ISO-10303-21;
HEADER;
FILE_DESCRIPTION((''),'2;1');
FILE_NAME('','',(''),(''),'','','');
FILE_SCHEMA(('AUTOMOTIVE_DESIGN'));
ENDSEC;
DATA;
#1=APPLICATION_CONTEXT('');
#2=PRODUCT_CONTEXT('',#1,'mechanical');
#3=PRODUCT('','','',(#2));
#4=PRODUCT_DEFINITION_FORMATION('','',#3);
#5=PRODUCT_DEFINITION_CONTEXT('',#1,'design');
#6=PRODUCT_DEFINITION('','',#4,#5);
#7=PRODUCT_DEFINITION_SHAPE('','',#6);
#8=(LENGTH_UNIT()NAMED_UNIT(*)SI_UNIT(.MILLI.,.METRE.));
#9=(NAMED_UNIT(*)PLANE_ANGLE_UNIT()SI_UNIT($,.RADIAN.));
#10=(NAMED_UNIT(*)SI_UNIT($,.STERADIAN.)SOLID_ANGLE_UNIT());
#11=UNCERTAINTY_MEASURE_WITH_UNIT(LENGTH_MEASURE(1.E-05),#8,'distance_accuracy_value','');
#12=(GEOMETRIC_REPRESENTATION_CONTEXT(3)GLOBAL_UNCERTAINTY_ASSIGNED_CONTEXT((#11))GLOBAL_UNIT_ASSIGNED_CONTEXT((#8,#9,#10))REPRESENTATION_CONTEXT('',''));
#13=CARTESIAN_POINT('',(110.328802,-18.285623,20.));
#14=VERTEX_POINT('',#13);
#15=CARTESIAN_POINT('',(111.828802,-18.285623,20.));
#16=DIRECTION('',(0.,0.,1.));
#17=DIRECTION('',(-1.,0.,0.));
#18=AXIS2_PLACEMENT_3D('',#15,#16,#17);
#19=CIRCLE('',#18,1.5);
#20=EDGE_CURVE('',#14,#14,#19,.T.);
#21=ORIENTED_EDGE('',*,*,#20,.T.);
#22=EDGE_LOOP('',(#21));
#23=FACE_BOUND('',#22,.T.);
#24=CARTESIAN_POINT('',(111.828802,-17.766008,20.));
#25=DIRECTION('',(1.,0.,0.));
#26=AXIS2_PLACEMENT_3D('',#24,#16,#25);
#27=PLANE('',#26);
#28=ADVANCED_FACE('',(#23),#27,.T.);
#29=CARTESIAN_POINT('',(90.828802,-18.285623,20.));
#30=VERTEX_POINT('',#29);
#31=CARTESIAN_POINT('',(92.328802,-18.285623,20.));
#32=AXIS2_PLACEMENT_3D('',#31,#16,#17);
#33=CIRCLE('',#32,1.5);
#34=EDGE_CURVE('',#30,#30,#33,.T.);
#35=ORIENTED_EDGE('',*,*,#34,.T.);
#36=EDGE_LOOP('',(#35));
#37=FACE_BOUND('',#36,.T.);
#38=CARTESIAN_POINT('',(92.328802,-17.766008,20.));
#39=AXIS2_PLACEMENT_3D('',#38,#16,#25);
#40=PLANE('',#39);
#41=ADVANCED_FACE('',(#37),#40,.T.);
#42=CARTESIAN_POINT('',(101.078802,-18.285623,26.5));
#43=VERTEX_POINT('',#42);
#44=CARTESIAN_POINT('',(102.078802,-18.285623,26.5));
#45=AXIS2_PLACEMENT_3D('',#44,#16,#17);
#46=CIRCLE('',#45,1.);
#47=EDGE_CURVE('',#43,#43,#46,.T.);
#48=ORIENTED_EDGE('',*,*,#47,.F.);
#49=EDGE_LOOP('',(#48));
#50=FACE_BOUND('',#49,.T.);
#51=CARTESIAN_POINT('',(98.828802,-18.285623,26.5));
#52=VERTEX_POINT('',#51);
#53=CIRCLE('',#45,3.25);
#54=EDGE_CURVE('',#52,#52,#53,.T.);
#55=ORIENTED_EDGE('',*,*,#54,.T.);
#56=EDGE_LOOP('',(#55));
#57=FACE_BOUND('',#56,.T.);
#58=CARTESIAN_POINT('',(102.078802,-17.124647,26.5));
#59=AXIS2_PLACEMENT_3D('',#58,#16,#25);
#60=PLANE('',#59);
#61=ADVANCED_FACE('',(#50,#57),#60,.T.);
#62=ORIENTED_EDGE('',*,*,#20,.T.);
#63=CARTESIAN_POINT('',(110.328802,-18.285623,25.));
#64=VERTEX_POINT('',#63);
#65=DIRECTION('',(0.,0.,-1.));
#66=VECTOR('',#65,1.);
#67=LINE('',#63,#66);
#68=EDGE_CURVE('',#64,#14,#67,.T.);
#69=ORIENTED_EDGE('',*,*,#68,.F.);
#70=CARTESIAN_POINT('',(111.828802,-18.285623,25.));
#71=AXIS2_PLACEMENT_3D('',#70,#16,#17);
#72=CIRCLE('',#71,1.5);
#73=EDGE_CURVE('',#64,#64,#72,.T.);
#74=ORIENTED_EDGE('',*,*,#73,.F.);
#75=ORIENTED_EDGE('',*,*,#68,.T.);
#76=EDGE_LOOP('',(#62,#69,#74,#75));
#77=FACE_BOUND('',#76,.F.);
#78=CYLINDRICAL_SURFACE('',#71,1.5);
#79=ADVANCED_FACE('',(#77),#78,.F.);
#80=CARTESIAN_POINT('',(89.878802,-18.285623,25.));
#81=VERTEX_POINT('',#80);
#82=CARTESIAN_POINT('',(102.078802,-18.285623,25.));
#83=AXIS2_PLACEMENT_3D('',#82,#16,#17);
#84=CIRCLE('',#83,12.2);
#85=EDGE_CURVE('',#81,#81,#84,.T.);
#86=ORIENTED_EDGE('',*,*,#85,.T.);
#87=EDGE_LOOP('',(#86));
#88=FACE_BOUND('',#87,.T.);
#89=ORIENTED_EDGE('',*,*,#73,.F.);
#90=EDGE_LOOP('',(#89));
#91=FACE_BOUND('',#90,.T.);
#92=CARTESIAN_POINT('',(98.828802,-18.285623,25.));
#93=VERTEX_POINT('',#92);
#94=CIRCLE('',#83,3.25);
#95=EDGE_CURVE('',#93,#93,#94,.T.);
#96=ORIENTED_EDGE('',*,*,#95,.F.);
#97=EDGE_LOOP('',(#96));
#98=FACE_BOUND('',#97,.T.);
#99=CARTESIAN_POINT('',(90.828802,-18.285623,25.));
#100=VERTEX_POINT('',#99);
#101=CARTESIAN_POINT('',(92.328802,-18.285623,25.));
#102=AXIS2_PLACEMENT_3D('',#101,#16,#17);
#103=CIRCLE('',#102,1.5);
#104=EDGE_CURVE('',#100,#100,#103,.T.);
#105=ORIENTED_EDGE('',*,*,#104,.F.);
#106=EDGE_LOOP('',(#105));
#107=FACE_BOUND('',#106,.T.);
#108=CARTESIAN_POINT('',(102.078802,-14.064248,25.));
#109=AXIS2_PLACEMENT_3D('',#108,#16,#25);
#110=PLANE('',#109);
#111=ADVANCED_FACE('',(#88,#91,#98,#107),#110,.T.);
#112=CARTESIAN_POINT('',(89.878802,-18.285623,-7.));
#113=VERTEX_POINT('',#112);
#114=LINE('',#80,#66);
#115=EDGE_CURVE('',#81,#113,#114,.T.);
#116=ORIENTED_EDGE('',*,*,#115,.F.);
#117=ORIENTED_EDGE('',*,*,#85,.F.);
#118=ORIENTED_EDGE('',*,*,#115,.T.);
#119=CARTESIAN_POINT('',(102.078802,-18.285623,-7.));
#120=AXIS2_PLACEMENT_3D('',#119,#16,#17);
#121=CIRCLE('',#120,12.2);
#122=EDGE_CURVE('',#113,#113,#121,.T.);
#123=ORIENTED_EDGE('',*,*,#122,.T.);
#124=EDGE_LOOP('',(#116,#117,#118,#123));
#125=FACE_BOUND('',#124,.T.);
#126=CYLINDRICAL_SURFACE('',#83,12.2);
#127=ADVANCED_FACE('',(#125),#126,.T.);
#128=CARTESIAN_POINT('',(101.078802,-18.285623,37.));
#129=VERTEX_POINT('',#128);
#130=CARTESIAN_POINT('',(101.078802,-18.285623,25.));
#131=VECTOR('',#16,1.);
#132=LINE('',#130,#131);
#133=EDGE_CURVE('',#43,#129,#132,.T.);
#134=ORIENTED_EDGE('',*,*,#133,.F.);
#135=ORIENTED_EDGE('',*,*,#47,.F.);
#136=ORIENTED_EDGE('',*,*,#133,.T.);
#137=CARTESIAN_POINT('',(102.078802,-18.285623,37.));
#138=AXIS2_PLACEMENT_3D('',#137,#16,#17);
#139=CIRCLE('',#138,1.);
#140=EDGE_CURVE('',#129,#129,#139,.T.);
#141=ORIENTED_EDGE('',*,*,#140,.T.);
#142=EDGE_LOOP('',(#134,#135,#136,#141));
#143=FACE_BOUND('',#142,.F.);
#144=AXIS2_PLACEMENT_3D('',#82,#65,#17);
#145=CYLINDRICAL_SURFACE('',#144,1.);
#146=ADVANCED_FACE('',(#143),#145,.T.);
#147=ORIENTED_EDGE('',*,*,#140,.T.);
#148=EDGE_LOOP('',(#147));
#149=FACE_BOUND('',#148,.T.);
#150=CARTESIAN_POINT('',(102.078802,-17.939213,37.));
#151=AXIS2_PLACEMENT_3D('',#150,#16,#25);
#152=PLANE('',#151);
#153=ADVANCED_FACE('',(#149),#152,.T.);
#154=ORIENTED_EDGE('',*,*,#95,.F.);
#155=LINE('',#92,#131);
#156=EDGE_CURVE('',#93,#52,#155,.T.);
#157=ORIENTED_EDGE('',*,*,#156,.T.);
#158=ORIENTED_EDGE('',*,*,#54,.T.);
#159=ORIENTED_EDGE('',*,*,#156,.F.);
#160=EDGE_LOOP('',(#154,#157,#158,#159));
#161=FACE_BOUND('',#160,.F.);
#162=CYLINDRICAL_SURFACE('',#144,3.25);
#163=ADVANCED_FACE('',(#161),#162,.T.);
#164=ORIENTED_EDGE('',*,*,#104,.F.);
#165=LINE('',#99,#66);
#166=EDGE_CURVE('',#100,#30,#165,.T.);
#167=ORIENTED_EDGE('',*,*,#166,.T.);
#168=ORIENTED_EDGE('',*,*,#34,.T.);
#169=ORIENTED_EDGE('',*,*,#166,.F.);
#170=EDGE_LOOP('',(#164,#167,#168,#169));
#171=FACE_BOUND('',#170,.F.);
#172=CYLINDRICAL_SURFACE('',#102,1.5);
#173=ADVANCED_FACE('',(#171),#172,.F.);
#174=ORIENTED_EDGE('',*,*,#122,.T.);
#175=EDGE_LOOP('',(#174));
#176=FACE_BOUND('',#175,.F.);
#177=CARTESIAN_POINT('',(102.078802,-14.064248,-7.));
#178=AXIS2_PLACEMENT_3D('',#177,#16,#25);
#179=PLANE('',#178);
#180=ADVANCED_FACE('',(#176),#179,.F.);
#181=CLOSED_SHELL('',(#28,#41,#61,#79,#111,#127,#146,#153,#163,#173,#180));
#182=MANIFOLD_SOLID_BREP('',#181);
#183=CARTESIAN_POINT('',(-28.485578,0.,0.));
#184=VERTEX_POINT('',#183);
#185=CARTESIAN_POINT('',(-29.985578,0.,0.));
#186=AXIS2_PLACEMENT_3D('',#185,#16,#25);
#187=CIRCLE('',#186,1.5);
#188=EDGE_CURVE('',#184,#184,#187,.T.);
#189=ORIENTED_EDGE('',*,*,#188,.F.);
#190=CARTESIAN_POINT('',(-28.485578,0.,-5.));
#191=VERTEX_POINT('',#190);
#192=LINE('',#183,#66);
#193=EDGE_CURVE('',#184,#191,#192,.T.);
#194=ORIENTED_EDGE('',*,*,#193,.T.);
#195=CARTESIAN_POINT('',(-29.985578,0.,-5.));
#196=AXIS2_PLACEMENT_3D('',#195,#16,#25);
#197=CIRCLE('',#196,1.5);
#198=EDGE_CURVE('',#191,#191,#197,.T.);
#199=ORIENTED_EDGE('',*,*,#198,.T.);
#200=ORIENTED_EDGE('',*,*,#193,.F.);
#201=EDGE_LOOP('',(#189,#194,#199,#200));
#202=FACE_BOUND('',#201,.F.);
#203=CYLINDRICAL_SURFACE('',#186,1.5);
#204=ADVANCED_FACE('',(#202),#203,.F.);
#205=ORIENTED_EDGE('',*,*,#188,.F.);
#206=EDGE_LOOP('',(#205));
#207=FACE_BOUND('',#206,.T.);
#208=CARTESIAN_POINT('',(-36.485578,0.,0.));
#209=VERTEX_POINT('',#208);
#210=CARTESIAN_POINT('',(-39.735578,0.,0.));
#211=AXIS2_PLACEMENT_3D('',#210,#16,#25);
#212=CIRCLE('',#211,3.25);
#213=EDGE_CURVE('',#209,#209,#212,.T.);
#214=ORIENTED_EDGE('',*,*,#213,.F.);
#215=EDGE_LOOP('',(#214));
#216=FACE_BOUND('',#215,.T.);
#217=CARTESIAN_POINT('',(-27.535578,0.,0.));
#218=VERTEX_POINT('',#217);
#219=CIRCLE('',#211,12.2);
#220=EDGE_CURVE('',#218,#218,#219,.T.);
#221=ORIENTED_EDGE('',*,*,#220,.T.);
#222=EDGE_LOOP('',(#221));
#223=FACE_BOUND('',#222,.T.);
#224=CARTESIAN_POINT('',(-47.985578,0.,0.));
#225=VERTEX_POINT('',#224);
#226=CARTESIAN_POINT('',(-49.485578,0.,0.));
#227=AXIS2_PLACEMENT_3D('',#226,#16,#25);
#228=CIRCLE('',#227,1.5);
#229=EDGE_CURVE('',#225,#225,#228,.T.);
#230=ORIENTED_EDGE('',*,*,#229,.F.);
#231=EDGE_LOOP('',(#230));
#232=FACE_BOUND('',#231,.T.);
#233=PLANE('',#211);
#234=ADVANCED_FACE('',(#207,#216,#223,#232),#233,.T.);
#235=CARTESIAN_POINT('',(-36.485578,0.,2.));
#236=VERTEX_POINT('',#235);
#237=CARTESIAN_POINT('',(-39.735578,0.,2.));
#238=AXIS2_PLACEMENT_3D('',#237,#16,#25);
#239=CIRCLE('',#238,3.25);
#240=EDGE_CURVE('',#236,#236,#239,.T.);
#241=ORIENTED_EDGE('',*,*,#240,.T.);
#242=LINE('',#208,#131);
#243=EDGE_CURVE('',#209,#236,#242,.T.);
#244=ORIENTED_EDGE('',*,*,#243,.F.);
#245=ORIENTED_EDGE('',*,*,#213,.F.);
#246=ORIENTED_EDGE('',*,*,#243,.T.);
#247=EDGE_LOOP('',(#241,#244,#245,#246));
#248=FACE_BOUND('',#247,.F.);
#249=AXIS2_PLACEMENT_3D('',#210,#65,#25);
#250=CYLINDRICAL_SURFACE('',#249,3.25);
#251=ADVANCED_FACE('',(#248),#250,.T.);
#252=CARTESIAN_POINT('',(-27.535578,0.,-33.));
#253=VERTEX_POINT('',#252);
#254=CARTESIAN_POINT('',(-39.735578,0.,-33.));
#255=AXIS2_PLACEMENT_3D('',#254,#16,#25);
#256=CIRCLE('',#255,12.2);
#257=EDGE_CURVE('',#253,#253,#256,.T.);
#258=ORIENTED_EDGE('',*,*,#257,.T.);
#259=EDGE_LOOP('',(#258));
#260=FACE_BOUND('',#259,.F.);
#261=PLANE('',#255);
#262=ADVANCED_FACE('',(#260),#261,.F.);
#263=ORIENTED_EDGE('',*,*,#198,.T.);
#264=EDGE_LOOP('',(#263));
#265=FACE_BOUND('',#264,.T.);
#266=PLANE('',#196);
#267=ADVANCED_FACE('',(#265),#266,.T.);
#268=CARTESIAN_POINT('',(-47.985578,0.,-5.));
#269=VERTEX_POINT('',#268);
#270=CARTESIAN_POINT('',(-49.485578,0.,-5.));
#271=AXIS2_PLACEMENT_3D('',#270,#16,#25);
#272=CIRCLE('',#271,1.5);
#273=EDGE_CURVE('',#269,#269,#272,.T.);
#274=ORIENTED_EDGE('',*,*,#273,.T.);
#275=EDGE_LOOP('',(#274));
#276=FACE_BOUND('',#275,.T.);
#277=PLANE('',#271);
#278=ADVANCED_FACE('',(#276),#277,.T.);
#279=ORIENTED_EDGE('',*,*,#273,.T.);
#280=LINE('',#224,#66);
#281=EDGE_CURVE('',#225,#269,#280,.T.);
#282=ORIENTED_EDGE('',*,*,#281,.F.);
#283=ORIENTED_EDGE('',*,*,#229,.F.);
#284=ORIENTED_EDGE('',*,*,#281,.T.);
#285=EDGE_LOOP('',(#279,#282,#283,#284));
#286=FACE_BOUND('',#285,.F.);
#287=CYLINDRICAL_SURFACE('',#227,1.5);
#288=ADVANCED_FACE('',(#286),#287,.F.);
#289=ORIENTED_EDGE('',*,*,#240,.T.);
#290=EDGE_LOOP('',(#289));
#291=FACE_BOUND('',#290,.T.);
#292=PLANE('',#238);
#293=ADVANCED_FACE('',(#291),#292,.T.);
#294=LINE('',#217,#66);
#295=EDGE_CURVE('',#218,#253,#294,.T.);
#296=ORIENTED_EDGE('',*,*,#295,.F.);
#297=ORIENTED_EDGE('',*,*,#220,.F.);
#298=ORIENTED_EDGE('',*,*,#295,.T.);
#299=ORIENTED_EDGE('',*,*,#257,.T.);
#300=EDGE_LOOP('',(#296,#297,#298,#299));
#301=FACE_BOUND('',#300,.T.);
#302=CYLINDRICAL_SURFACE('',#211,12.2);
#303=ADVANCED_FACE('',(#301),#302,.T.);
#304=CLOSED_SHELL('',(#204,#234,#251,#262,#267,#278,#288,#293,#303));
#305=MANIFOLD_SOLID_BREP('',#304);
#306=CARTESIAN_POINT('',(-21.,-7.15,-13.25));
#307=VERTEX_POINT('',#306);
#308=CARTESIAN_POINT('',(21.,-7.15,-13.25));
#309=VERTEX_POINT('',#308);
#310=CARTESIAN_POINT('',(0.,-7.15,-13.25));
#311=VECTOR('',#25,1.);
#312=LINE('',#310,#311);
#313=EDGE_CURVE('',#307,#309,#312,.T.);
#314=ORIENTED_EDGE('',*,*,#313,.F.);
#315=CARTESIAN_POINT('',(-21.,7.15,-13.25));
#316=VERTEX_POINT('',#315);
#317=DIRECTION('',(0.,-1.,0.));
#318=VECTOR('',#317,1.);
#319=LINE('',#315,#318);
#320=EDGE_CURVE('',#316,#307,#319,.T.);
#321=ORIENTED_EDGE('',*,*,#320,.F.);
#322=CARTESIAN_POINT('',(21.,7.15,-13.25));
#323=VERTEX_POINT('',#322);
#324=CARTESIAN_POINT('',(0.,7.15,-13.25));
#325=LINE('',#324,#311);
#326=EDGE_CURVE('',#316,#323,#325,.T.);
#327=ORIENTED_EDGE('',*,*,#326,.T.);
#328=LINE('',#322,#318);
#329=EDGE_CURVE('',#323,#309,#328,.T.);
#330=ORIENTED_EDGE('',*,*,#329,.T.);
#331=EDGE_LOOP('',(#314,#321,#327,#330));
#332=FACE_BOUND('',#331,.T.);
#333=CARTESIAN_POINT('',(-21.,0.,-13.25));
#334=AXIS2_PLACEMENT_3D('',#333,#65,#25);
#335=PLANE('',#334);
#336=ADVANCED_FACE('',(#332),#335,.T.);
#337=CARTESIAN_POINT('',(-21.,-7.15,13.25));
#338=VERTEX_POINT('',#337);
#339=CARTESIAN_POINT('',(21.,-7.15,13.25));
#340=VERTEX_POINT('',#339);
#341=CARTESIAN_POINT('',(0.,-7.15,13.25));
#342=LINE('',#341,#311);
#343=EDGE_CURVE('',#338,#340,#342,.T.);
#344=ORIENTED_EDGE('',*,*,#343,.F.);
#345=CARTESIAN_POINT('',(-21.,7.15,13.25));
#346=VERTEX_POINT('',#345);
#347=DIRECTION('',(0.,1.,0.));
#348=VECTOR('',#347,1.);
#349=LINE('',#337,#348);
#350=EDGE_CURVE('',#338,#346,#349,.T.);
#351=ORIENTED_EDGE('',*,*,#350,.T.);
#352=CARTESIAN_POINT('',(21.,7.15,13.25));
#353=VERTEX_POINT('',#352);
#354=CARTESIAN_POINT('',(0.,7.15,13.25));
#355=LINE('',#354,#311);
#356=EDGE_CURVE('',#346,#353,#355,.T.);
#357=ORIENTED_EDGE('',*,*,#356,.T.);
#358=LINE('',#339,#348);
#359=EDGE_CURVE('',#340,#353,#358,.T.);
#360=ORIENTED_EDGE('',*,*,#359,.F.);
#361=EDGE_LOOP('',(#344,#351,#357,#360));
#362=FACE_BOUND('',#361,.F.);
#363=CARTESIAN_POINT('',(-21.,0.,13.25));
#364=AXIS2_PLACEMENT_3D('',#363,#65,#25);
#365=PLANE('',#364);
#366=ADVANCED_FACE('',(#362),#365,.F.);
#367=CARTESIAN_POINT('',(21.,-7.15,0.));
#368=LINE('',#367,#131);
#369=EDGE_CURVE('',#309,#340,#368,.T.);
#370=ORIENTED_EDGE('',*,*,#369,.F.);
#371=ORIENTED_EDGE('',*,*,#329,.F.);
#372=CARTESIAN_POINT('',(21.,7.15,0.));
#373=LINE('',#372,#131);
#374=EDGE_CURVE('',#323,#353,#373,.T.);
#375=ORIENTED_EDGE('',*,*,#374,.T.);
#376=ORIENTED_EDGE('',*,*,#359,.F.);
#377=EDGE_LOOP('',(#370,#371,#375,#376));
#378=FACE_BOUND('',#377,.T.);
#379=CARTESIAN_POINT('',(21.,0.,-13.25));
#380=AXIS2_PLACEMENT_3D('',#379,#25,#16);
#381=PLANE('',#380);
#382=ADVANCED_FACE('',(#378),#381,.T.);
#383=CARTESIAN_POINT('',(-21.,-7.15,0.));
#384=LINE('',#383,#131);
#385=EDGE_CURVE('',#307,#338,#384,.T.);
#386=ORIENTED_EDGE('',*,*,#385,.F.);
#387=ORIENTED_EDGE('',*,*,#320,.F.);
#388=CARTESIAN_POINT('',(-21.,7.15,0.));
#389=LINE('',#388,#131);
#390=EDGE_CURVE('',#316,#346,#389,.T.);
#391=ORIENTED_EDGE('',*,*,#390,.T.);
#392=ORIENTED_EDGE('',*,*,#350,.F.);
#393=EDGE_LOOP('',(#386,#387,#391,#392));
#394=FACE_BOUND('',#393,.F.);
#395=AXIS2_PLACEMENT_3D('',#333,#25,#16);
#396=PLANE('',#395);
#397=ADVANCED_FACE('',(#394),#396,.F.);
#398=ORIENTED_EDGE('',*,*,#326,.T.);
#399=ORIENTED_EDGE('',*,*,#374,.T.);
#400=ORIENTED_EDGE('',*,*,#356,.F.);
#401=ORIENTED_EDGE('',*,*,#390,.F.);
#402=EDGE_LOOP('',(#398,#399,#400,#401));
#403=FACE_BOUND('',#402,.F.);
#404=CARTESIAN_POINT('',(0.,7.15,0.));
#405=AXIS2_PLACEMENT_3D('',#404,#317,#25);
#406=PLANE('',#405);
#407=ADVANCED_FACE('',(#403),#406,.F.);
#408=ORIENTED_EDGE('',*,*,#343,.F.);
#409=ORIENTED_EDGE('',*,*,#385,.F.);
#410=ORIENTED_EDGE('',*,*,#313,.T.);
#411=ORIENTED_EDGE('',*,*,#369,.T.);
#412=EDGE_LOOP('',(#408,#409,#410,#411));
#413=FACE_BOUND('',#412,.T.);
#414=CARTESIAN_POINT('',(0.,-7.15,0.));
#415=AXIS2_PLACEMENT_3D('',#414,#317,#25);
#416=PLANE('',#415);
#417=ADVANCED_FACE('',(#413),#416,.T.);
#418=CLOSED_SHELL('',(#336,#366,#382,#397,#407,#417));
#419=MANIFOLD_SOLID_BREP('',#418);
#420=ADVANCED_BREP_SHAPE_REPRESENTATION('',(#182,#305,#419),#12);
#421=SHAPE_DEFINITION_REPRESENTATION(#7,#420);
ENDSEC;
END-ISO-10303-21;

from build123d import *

# Parameters (mm, degrees)
F0_W      = 42
F0_H      = 26.5
F1_DEPTH  = 7.15
F3_R      = 12.2
F3_R_2    = 1.5
F3_R_3    = 3.25
F3_R_4    = 1
F4_DEPTH  = 33
F5_DEPTH  = 2
F7_DEPTH  = 5
F10_DEPTH = 32
F11_DEPTH = 5
F12_DEPTH = 1.5
F13_DEPTH = 12


# Not quite as in the source:
# - the program builds the solid bodies; features that only make, move or delete a surface that nothing else refers to are left out


with BuildPart() as f1:
    # F0 (on Front) → F1 (new body, symmetric)
    with BuildSketch(Plane.XZ):
        Rectangle(F0_W, F0_H)
    extrude(amount=F1_DEPTH, both=True)


with BuildPart() as f4:
    # F3 (on Top) → F4 (new body)
    with BuildSketch(Plane.XY):
        with Locations((-39.7355780005, 0)):
            Circle(F3_R)
        with Locations((-49.4855780005, 0)):
            Circle(F3_R_2, mode=Mode.SUBTRACT)
        with Locations((-39.7355780005, 0)):
            Circle(F3_R_3, mode=Mode.SUBTRACT)
        with Locations((-29.9855780005, 0)):
            Circle(F3_R_2, mode=Mode.SUBTRACT)
        with Locations((-39.7355780005, 0)):
            Circle(F3_R_3)
        with Locations((-39.7355780005, 0)):
            Circle(F3_R_4, mode=Mode.SUBTRACT)
        with Locations((-49.4855780005, 0)):
            Circle(F3_R_2)
        with Locations((-29.9855780005, 0)):
            Circle(F3_R_2)
        with Locations((-39.7355780005, 0)):
            Circle(F3_R_4)
    extrude(amount=-F4_DEPTH)

    # F3 (on Top) → F5 (join)
    with BuildSketch(Plane.XY):
        with Locations((-39.7355780005, 0)):
            Circle(F3_R_3)
        with Locations((-39.7355780005, 0)):
            Circle(F3_R_4, mode=Mode.SUBTRACT)
        with Locations((-39.7355780005, 0)):
            Circle(F3_R_4)
    extrude(amount=F5_DEPTH)

    # F3 (on Top) → F7 (cut)
    with BuildSketch(Plane.XY):
        with Locations((-49.4855780005, 0)):
            Circle(F3_R_2)
        with Locations((-29.9855780005, 0)):
            Circle(F3_R_2)
    extrude(amount=-F7_DEPTH, mode=Mode.SUBTRACT)


with BuildPart() as f10:
    # F9 (on offset) → F10 (new body)
    with BuildSketch(Plane.XY.offset(25)):
        with BuildLine():
            Line((113.3288017511, -18.2856229367), (114.2788017511, -18.2856229367))
            ThreePointArc((114.2788017511, -18.2856229367), (102.0788017511, -6.0856229367), (89.8788017511, -18.2856229367))
            Line((89.8788017511, -18.2856229367), (90.8288017511, -18.2856229367))
            ThreePointArc((90.8288017511, -18.2856229367), (92.3288017511, -16.7856229367), (93.8288017511, -18.2856229367))
            Line((93.8288017511, -18.2856229367), (98.8288017511, -18.2856229367))
            ThreePointArc((98.8288017511, -18.2856229367), (102.0788017511, -15.0356229367), (105.3288017511, -18.2856229367))
            Line((105.3288017511, -18.2856229367), (110.3288017511, -18.2856229367))
            ThreePointArc((110.3288017511, -18.2856229367), (111.8288017511, -16.7856229367), (113.3288017511, -18.2856229367))
        make_face()
        with BuildLine():
            ThreePointArc((89.8788017511, -18.2856229367), (102.0788017511, -30.4856229367), (114.2788017511, -18.2856229367))
            Line((114.2788017511, -18.2856229367), (113.3288017511, -18.2856229367))
            ThreePointArc((113.3288017511, -18.2856229367), (111.8288017511, -19.7856229367), (110.3288017511, -18.2856229367))
            Line((110.3288017511, -18.2856229367), (105.3288017511, -18.2856229367))
            ThreePointArc((105.3288017511, -18.2856229367), (102.0788017511, -21.5356229367), (98.8288017511, -18.2856229367))
            Line((98.8288017511, -18.2856229367), (93.8288017511, -18.2856229367))
            ThreePointArc((93.8288017511, -18.2856229367), (92.3288017511, -19.7856229367), (90.8288017511, -18.2856229367))
            Line((90.8288017511, -18.2856229367), (89.8788017511, -18.2856229367))
        make_face()
        with BuildLine():
            Line((110.3288017511, -18.2856229367), (113.3288017511, -18.2856229367))
            ThreePointArc((113.3288017511, -18.2856229367), (111.8288017511, -16.7856229367), (110.3288017511, -18.2856229367))
        make_face()
        with BuildLine():
            ThreePointArc((110.3288017511, -18.2856229367), (111.8288017511, -19.7856229367), (113.3288017511, -18.2856229367))
            Line((113.3288017511, -18.2856229367), (110.3288017511, -18.2856229367))
        make_face()
        with BuildLine():
            Line((103.0788017511, -18.2856229367), (105.3288017511, -18.2856229367))
            ThreePointArc((105.3288017511, -18.2856229367), (102.0788017511, -15.0356229367), (98.8288017511, -18.2856229367))
            Line((98.8288017511, -18.2856229367), (101.0788017511, -18.2856229367))
            ThreePointArc((101.0788017511, -18.2856229367), (102.0788017511, -17.2856229367), (103.0788017511, -18.2856229367))
        make_face()
        with BuildLine():
            ThreePointArc((98.8288017511, -18.2856229367), (102.0788017511, -21.5356229367), (105.3288017511, -18.2856229367))
            Line((105.3288017511, -18.2856229367), (103.0788017511, -18.2856229367))
            ThreePointArc((103.0788017511, -18.2856229367), (102.0788017511, -19.2856229367), (101.0788017511, -18.2856229367))
            Line((101.0788017511, -18.2856229367), (98.8288017511, -18.2856229367))
        make_face()
        with BuildLine():
            Line((101.0788017511, -18.2856229367), (103.0788017511, -18.2856229367))
            ThreePointArc((103.0788017511, -18.2856229367), (102.0788017511, -17.2856229367), (101.0788017511, -18.2856229367))
        make_face()
        with BuildLine():
            ThreePointArc((101.0788017511, -18.2856229367), (102.0788017511, -19.2856229367), (103.0788017511, -18.2856229367))
            Line((103.0788017511, -18.2856229367), (101.0788017511, -18.2856229367))
        make_face()
        with BuildLine():
            ThreePointArc((93.8288017511, -18.2856229367), (92.3288017511, -16.7856229367), (90.8288017511, -18.2856229367))
            Line((90.8288017511, -18.2856229367), (93.8288017511, -18.2856229367))
        make_face()
        with BuildLine():
            Line((93.8288017511, -18.2856229367), (90.8288017511, -18.2856229367))
            ThreePointArc((90.8288017511, -18.2856229367), (92.3288017511, -19.7856229367), (93.8288017511, -18.2856229367))
        make_face()
    extrude(amount=-F10_DEPTH)

    # F9 (on offset) → F11 (cut)
    with BuildSketch(Plane.XY.offset(25)):
        with BuildLine():
            ThreePointArc((93.8288017511, -18.2856229367), (92.3288017511, -16.7856229367), (90.8288017511, -18.2856229367))
            Line((90.8288017511, -18.2856229367), (93.8288017511, -18.2856229367))
        make_face()
        with BuildLine():
            Line((93.8288017511, -18.2856229367), (90.8288017511, -18.2856229367))
            ThreePointArc((90.8288017511, -18.2856229367), (92.3288017511, -19.7856229367), (93.8288017511, -18.2856229367))
        make_face()
        with BuildLine():
            Line((110.3288017511, -18.2856229367), (113.3288017511, -18.2856229367))
            ThreePointArc((113.3288017511, -18.2856229367), (111.8288017511, -16.7856229367), (110.3288017511, -18.2856229367))
        make_face()
        with BuildLine():
            ThreePointArc((110.3288017511, -18.2856229367), (111.8288017511, -19.7856229367), (113.3288017511, -18.2856229367))
            Line((113.3288017511, -18.2856229367), (110.3288017511, -18.2856229367))
        make_face()
    extrude(amount=-F11_DEPTH, mode=Mode.SUBTRACT)

    # F9 (on offset) → F12 (join)
    with BuildSketch(Plane.XY.offset(25)):
        with BuildLine():
            Line((103.0788017511, -18.2856229367), (105.3288017511, -18.2856229367))
            ThreePointArc((105.3288017511, -18.2856229367), (102.0788017511, -15.0356229367), (98.8288017511, -18.2856229367))
            Line((98.8288017511, -18.2856229367), (101.0788017511, -18.2856229367))
            ThreePointArc((101.0788017511, -18.2856229367), (102.0788017511, -17.2856229367), (103.0788017511, -18.2856229367))
        make_face()
        with BuildLine():
            ThreePointArc((98.8288017511, -18.2856229367), (102.0788017511, -21.5356229367), (105.3288017511, -18.2856229367))
            Line((105.3288017511, -18.2856229367), (103.0788017511, -18.2856229367))
            ThreePointArc((103.0788017511, -18.2856229367), (102.0788017511, -19.2856229367), (101.0788017511, -18.2856229367))
            Line((101.0788017511, -18.2856229367), (98.8288017511, -18.2856229367))
        make_face()
    extrude(amount=F12_DEPTH)

    # F9 (on offset) → F13 (join)
    with BuildSketch(Plane.XY.offset(25)):
        with BuildLine():
            Line((101.0788017511, -18.2856229367), (103.0788017511, -18.2856229367))
            ThreePointArc((103.0788017511, -18.2856229367), (102.0788017511, -17.2856229367), (101.0788017511, -18.2856229367))
        make_face()
        with BuildLine():
            ThreePointArc((101.0788017511, -18.2856229367), (102.0788017511, -19.2856229367), (103.0788017511, -18.2856229367))
            Line((103.0788017511, -18.2856229367), (101.0788017511, -18.2856229367))
        make_face()
    extrude(amount=F13_DEPTH)


solid = Compound([f1.part, f4.part, f10.part])
